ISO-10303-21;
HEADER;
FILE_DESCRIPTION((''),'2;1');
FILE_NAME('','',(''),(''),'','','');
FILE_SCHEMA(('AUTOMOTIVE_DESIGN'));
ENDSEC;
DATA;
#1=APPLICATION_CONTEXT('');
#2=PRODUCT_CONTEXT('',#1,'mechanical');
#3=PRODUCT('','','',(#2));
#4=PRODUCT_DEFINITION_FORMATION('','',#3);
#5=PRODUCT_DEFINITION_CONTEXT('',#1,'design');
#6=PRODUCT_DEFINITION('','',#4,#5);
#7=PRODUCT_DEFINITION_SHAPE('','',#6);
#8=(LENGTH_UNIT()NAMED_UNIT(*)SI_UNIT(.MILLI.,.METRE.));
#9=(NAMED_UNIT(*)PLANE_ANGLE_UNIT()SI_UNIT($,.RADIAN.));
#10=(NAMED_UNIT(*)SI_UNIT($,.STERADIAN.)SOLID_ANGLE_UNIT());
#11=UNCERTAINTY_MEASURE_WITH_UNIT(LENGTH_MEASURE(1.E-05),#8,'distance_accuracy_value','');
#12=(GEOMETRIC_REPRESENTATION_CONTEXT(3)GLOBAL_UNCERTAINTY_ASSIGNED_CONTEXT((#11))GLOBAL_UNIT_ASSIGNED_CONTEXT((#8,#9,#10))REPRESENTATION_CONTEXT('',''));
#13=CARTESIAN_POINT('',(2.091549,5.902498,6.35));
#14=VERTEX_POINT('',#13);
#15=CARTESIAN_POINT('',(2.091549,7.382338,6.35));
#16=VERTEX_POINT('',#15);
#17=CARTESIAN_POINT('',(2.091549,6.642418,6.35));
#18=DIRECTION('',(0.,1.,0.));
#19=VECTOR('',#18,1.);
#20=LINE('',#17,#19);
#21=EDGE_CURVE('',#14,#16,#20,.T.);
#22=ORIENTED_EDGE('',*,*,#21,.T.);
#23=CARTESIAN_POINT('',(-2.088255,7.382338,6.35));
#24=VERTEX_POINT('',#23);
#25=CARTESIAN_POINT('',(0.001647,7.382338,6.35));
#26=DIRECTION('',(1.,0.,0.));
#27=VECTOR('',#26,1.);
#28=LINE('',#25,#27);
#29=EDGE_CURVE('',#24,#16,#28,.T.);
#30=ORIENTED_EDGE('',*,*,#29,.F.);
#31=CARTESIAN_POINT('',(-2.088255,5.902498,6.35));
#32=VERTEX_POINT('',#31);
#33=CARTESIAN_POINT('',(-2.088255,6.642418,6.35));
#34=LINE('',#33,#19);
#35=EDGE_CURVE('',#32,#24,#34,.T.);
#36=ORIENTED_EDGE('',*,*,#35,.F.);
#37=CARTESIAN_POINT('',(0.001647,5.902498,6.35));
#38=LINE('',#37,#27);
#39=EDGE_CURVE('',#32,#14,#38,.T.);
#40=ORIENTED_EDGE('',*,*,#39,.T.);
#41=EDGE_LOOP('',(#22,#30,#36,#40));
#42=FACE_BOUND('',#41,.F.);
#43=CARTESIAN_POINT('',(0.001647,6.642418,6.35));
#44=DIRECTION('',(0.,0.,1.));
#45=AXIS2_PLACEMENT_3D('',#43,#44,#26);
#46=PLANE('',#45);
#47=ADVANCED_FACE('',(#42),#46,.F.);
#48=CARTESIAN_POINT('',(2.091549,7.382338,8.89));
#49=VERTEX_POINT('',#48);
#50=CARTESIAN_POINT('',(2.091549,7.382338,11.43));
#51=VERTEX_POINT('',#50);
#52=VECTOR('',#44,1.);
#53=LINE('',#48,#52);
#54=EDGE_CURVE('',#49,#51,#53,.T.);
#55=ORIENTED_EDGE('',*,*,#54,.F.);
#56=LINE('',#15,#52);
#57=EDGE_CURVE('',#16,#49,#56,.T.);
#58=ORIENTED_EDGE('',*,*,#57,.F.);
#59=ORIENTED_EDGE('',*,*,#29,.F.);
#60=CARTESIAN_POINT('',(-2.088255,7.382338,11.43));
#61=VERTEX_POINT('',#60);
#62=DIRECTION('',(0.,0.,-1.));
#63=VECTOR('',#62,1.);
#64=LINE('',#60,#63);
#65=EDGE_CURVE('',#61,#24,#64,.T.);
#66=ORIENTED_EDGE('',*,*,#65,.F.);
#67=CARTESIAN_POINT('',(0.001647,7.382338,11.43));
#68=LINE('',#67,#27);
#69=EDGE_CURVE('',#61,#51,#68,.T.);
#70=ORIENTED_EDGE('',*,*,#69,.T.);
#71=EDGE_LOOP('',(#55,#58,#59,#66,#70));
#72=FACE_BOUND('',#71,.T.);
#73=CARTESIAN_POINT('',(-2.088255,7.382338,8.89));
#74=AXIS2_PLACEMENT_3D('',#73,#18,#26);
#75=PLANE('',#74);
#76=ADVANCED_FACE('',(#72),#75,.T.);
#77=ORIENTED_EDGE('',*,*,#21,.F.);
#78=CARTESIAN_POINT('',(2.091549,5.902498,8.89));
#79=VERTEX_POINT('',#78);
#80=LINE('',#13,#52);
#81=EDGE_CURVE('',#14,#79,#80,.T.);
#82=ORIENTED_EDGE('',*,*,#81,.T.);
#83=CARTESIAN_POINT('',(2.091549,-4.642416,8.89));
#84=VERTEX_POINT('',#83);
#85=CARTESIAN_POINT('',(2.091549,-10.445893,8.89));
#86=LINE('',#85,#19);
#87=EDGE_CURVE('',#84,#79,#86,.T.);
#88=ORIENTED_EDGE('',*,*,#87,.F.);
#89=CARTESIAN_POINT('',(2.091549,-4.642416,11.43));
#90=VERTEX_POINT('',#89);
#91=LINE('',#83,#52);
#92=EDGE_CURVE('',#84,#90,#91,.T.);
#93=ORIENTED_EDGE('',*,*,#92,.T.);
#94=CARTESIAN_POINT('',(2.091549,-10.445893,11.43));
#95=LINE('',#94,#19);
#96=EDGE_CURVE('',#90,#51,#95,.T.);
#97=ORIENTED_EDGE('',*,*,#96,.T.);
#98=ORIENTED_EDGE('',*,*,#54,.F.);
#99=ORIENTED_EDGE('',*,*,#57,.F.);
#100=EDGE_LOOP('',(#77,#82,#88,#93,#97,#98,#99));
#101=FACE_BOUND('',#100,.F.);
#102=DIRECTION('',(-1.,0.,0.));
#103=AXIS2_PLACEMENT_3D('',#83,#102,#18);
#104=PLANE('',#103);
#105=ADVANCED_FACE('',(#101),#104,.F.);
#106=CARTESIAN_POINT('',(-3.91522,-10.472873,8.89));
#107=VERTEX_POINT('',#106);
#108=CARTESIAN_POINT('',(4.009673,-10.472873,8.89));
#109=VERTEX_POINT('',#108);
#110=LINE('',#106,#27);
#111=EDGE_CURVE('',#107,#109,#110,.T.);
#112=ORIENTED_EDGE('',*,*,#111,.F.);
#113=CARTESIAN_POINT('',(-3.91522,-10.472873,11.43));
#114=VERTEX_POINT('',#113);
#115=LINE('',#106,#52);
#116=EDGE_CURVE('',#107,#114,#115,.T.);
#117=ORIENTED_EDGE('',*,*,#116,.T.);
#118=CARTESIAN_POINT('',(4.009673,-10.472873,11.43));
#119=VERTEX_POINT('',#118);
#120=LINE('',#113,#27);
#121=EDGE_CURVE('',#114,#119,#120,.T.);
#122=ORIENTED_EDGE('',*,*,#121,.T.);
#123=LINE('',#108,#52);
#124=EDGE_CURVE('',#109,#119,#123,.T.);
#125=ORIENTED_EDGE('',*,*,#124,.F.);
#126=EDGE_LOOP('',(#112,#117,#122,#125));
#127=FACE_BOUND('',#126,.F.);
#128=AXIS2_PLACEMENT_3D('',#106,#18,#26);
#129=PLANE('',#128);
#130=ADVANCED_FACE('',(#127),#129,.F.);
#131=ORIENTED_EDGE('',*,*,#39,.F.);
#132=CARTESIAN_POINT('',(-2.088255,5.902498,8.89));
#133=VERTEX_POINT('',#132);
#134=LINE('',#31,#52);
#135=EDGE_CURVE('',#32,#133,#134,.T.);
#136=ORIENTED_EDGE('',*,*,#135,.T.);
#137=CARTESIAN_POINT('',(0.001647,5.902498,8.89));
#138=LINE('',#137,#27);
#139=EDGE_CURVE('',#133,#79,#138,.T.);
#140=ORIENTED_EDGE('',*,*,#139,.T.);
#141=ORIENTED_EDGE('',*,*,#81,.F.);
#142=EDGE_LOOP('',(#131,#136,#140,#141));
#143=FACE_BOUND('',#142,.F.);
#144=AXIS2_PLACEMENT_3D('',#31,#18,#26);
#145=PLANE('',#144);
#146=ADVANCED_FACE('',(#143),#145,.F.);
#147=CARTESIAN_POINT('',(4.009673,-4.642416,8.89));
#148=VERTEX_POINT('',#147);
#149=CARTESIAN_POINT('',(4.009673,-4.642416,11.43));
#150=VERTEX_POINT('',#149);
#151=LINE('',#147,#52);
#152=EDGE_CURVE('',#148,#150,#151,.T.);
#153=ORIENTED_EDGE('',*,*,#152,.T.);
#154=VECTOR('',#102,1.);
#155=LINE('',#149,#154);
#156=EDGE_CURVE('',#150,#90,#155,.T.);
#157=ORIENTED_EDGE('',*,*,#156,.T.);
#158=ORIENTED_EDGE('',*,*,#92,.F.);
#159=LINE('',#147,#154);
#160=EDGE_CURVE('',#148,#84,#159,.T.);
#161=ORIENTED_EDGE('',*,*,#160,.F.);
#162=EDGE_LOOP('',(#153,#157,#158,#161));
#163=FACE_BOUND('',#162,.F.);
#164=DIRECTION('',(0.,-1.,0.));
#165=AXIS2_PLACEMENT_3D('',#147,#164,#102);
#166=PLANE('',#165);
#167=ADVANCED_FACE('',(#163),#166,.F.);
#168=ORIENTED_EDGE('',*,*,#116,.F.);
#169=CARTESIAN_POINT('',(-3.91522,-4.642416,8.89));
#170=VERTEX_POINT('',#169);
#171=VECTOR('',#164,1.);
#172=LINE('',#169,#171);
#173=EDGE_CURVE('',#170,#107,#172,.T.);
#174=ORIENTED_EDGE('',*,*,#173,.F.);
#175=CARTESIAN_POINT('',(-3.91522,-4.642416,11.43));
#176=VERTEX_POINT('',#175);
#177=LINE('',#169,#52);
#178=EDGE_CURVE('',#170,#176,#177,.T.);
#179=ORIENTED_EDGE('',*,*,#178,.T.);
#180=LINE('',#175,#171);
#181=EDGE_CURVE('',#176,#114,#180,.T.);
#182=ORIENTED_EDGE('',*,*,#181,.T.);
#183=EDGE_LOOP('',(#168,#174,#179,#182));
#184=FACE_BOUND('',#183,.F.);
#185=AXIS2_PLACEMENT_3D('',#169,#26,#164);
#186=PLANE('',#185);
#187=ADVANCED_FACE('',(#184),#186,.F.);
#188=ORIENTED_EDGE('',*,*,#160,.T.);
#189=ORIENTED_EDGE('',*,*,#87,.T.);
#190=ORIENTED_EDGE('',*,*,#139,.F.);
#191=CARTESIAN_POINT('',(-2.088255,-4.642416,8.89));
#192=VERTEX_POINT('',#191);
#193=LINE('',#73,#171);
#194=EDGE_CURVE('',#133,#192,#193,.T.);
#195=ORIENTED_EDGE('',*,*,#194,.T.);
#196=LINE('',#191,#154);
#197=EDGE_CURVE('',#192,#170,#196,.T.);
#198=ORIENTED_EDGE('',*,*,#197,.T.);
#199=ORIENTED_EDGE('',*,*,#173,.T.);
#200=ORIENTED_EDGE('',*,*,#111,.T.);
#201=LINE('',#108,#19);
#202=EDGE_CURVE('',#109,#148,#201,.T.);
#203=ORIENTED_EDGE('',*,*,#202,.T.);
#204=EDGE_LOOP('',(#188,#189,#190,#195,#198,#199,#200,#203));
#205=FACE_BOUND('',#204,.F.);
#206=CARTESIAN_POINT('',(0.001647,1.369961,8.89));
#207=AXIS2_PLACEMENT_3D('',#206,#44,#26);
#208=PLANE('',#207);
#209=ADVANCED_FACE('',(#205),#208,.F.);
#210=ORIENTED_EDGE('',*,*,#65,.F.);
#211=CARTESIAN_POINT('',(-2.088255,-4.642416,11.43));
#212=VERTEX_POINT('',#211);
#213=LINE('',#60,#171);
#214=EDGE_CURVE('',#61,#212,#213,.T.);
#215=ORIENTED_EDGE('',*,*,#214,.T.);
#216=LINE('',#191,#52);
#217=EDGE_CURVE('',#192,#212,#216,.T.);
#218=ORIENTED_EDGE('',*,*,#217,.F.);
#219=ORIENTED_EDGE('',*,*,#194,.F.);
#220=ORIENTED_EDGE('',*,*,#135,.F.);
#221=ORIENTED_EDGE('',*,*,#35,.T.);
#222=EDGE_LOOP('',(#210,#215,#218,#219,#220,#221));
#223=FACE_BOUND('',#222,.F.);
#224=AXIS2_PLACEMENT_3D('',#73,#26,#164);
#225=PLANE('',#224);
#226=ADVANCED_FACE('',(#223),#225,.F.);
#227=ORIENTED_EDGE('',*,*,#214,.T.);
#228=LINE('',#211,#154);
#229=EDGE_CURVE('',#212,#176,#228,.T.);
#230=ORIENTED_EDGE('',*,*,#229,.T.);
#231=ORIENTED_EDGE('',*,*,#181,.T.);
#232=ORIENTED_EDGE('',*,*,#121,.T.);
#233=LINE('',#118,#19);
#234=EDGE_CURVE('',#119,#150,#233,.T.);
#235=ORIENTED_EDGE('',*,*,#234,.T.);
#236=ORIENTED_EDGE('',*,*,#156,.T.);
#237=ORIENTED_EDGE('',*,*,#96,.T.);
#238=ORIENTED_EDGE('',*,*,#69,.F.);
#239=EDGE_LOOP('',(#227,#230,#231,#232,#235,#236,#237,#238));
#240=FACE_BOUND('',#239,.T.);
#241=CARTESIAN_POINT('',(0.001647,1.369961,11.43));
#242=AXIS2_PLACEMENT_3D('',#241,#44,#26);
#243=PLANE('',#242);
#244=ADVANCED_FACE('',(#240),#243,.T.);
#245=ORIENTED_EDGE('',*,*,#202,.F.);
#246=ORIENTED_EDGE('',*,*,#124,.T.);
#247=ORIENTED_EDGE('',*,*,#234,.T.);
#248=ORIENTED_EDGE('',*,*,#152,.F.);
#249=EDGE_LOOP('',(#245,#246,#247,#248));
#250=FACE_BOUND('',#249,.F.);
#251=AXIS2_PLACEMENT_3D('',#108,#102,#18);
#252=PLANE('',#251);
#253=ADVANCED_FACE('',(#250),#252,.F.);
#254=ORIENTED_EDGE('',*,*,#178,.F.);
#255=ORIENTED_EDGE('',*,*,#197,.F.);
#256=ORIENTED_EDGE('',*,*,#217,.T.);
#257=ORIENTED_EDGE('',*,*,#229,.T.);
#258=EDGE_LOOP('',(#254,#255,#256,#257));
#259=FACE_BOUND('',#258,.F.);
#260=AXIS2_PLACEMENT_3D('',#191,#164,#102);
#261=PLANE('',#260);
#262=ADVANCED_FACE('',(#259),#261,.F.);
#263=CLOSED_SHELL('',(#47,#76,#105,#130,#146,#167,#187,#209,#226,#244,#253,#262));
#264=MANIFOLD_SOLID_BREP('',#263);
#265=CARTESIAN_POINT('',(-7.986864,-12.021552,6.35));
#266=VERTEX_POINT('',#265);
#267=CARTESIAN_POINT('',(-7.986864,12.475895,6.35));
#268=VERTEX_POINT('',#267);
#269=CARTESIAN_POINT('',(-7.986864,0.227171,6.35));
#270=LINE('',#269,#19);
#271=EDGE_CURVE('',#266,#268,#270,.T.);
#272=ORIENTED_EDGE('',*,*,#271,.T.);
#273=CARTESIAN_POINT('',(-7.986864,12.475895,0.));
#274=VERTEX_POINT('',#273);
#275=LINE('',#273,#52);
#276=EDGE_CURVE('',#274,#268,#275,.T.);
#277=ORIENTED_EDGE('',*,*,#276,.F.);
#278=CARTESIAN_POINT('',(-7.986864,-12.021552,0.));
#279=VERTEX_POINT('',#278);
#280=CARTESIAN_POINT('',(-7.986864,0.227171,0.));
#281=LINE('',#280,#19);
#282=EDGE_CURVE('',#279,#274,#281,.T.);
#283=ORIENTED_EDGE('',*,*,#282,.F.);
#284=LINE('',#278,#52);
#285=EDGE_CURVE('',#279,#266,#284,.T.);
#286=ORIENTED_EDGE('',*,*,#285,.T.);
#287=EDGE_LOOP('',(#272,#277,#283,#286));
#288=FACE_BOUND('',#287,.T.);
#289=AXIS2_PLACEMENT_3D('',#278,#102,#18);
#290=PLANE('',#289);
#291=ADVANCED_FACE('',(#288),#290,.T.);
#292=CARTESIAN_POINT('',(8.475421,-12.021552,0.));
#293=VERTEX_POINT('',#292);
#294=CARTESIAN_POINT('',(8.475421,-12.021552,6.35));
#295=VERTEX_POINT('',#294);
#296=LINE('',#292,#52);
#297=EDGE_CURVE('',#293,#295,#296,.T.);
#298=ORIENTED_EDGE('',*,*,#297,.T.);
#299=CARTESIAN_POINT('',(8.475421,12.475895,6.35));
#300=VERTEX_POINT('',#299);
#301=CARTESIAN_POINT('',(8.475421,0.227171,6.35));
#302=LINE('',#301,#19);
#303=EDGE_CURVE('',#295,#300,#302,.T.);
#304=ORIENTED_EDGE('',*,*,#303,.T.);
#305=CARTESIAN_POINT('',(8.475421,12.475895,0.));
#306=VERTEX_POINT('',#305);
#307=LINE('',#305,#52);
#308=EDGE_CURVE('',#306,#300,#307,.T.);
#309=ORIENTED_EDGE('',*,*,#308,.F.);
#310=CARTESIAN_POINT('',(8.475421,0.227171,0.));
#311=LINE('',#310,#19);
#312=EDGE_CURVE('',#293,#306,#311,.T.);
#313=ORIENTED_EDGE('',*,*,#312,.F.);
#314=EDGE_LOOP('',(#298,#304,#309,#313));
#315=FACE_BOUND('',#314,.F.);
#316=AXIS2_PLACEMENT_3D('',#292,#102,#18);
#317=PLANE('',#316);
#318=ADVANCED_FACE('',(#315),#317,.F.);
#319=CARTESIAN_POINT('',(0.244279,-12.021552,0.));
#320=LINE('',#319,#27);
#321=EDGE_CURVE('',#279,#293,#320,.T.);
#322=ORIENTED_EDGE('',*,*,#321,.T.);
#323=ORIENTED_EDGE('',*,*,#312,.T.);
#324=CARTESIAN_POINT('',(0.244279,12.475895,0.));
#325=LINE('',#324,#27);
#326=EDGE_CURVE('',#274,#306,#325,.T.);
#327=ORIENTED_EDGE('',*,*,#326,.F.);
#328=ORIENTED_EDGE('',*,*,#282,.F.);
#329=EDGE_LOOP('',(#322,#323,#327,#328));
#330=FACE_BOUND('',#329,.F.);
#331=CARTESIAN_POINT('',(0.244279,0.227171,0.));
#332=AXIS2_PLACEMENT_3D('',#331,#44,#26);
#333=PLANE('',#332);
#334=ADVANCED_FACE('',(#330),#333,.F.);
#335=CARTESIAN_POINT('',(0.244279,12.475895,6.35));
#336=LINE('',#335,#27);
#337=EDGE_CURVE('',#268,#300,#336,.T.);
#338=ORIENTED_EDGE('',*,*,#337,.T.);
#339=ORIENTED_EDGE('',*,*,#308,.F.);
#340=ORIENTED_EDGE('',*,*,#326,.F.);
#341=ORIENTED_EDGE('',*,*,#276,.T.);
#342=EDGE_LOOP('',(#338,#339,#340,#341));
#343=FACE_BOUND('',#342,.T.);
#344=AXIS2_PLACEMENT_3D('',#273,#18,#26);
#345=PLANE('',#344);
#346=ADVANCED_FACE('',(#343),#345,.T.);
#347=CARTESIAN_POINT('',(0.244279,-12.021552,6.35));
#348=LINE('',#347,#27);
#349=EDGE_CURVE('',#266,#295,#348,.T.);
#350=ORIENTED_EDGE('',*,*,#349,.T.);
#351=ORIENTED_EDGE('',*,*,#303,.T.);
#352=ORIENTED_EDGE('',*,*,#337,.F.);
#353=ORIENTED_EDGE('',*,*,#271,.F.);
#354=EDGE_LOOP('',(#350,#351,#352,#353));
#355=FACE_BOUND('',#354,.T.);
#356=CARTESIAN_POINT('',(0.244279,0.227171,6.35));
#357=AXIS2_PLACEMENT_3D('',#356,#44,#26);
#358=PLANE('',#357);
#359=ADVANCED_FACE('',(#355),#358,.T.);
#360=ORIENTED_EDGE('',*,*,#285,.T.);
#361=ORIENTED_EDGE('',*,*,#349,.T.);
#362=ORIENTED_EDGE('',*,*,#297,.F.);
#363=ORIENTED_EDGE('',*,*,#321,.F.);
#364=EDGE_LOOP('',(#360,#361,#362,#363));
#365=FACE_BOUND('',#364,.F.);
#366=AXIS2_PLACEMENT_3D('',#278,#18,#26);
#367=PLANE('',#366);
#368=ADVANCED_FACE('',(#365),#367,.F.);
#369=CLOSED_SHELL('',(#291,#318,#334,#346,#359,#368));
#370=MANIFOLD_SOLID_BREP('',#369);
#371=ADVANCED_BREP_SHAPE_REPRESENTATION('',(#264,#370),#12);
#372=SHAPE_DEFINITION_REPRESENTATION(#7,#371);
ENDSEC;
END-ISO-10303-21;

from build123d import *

# Parameters (mm, degrees)
F0_W     = 16.462284606
F0_H     = 24.4974466041
F1_DEPTH = 6.35
F3_W     = 4.1798030725
F3_H     = 1.4798403718
F4_DEPTH = 2.54
F5_W     = 4.1798030725
F5_H     = 12.0247541927
F5_H_2   = 5.8034774847
F6_DEPTH = 2.54


with BuildPart() as f1:
    # F0 (on Top) → F1 (new body)
    with BuildSketch(Plane.XY):
        with Locations((0.2442786936, 0.227171462)):
            Rectangle(F0_W, F0_H)
    extrude(amount=F1_DEPTH)


with BuildPart() as f4:
    # F3 (on face) → F4 (new body)
    with BuildSketch(Plane.XY.offset(6.35)):
        with Locations((0.0016469858, 6.6424182151)):
            Rectangle(F3_W, F3_H)
    extrude(amount=F4_DEPTH)

    # F5 (on face) → F6 (join)
    with BuildSketch(Plane.XY.offset(8.89)):
        with Locations((0.0016469858, 1.3699613046)):
            Rectangle(F5_W, F5_H)
        with Locations((0.0016469858, -7.5441545341)):
            Rectangle(F5_W, F5_H_2)
        Polygon((-2.0882545505, -10.4458932765), (-2.0882545505, -4.6424157917), (-3.9152200043, -4.6424157917), (-3.9152200043, -10.4728732258), (4.009673401, -10.4728732258), (4.009673401, -4.6424157917), (2.091548522, -4.6424157917), (2.091548522, -10.4458932765), align=None)
    extrude(amount=F6_DEPTH)


solid = Compound([f1.part, f4.part])
